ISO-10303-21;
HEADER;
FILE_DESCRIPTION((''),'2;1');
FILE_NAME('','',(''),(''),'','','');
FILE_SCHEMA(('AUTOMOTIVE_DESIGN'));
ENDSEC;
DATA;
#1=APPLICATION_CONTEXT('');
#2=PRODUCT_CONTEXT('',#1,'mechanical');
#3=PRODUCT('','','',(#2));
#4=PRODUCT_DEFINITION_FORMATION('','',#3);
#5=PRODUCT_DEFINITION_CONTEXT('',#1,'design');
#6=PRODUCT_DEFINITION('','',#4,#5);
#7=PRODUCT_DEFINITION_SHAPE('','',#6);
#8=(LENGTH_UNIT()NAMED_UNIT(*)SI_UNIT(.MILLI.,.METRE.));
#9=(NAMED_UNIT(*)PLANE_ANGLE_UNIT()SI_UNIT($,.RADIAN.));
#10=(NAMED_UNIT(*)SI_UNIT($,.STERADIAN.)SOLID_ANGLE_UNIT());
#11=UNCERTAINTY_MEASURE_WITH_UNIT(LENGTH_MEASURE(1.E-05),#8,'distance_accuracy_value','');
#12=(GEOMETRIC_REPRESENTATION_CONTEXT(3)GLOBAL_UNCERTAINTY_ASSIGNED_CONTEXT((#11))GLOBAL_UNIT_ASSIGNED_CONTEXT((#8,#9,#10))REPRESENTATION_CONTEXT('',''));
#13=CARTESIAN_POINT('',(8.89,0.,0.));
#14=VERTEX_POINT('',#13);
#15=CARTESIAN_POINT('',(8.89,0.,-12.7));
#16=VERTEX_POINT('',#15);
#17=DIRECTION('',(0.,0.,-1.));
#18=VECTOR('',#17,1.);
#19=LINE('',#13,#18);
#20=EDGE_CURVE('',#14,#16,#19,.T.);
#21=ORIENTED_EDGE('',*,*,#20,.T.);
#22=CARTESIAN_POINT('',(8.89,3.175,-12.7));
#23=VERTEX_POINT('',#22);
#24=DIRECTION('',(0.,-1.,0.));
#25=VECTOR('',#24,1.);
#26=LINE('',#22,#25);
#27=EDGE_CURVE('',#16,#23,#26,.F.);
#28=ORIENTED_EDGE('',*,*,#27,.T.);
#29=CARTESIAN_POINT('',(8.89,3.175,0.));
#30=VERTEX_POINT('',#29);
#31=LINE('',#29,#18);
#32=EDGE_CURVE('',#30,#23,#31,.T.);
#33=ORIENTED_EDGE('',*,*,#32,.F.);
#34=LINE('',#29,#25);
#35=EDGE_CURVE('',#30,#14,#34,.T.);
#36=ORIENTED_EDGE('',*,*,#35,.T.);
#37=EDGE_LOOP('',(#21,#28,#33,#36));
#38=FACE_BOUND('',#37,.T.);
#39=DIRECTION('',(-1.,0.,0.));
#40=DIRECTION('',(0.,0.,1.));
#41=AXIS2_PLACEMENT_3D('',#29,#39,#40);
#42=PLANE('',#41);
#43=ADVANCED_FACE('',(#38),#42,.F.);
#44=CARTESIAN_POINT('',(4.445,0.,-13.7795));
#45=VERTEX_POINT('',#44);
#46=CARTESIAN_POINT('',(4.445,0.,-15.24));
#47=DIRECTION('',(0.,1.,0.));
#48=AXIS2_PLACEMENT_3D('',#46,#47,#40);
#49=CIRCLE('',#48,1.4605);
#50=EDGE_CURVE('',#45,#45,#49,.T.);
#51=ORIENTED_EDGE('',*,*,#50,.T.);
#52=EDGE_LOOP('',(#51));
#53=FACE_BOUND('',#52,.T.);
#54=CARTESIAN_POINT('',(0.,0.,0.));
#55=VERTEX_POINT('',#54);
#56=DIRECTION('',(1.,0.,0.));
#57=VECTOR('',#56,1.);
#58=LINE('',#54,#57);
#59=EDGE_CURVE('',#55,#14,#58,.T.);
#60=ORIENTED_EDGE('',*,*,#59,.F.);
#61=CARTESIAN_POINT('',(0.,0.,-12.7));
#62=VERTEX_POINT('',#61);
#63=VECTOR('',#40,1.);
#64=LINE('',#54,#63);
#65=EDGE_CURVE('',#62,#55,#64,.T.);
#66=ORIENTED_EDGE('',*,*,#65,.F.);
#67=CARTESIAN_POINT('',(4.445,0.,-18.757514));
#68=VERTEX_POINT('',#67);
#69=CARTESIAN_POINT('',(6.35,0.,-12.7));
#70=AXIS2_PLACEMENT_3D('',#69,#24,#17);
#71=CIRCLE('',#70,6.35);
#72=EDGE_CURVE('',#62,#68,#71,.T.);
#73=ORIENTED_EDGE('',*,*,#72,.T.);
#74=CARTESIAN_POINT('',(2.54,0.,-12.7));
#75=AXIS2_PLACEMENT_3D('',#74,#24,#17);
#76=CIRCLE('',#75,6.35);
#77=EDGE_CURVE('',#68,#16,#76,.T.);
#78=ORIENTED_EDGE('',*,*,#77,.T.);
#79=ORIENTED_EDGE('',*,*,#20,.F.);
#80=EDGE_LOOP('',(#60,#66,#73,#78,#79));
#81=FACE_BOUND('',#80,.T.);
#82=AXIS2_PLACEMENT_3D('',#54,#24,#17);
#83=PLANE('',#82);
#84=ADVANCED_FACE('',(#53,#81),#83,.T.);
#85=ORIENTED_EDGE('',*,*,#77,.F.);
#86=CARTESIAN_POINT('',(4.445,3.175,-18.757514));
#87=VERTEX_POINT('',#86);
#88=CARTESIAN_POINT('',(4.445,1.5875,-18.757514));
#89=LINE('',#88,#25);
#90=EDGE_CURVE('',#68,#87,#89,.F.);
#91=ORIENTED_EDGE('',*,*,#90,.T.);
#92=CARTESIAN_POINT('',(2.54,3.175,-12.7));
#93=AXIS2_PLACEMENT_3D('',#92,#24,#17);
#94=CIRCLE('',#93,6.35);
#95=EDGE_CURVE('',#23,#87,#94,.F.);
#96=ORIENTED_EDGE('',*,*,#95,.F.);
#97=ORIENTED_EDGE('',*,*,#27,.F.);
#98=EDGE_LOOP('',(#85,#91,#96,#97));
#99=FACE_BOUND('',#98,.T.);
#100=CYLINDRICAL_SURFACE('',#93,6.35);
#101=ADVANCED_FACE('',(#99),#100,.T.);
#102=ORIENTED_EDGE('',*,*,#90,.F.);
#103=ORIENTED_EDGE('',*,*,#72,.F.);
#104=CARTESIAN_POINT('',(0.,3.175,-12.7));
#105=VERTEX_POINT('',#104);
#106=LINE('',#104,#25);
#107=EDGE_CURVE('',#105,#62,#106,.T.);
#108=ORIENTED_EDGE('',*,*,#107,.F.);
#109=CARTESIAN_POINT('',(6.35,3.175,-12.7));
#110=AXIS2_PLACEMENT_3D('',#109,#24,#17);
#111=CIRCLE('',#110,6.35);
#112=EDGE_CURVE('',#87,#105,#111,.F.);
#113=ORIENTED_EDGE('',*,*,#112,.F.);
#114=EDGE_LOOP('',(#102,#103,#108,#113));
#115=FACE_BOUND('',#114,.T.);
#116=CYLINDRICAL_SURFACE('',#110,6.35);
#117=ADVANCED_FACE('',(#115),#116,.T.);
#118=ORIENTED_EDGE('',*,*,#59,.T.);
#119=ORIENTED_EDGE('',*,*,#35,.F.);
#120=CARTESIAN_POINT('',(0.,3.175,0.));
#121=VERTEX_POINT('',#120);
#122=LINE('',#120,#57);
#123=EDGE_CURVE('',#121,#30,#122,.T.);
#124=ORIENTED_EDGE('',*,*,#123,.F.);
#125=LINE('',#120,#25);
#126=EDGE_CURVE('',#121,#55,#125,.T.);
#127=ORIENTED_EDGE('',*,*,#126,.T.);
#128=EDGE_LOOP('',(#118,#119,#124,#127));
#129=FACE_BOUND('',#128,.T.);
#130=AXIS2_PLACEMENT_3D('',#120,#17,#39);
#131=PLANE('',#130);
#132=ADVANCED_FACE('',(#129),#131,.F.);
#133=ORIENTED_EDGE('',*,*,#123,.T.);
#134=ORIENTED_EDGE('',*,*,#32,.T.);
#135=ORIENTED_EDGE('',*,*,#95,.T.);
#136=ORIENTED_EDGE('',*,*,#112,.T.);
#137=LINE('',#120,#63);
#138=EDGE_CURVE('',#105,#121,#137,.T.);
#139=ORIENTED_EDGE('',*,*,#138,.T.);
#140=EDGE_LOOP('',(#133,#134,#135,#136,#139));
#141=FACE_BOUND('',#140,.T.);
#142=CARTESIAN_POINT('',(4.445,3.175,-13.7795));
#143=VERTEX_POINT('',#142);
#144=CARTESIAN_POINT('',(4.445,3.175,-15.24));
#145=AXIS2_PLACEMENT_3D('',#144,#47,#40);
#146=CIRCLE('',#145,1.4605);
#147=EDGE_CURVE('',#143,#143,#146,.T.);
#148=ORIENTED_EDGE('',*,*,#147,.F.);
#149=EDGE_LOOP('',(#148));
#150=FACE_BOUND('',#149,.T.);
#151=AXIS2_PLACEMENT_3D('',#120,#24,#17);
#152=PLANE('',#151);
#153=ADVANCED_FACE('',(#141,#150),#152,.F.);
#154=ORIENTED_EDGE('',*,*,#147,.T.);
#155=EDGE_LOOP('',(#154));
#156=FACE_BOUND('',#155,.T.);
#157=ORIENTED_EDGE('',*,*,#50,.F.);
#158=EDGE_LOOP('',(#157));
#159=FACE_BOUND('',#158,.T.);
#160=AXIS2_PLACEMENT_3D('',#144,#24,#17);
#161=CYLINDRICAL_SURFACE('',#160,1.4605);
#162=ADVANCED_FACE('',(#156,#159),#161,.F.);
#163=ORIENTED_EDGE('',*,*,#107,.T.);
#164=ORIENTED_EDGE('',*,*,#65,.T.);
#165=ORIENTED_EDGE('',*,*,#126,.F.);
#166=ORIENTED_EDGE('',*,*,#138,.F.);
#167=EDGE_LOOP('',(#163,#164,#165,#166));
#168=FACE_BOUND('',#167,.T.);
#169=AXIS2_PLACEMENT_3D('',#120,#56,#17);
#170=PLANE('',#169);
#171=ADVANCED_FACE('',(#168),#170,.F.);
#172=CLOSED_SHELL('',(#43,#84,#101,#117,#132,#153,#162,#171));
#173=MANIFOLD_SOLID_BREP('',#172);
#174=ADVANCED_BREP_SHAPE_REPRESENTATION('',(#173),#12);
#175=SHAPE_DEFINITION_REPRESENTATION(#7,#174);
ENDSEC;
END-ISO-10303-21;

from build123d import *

# Parameters (mm, degrees)
SKETCH1_W           = 8.89
SKETCH1_H           = 19.05
SKETCH1_R           = 1.4605
BOSS_EXTRUDE1_DEPTH = 3.175
FILLET1_R           = 6.35


with BuildPart() as part:
    # Sketch1 → Boss-Extrude1 (new body)
    with BuildSketch(Plane(origin=(0, 0, 0), x_dir=(1, 0, 0), z_dir=(0, 1, 0))):
        with Locations((4.445, 9.525)):
            Rectangle(SKETCH1_W, SKETCH1_H)
        with Locations(Location((4.445, 15.24, 0), (0, 0, 270))):
            Circle(SKETCH1_R, mode=Mode.SUBTRACT)
    extrude(amount=BOSS_EXTRUDE1_DEPTH)

    # Fillet1
    # the kernel refuses this fillet: 6.35 mm, written as the material it takes off along each edge
    with BuildSketch(Plane(origin=(8.89, -15.875, -19.05), x_dir=(0, 0, 1), z_dir=(0, 1, 0)), Plane(origin=(0, -15.875, -19.05), x_dir=(1, 0, 0), z_dir=(0, 1, 0))) as fillet1_piece_1:
        with BuildLine():
            CenterArc((FILLET1_R, -FILLET1_R), FILLET1_R, 90, 90)
            Line((0, -FILLET1_R), (0, 0))
            Line((0, 0), (FILLET1_R, 0))
        make_face()
    extrude(amount=34.925, mode=Mode.SUBTRACT)


solid = part.part
